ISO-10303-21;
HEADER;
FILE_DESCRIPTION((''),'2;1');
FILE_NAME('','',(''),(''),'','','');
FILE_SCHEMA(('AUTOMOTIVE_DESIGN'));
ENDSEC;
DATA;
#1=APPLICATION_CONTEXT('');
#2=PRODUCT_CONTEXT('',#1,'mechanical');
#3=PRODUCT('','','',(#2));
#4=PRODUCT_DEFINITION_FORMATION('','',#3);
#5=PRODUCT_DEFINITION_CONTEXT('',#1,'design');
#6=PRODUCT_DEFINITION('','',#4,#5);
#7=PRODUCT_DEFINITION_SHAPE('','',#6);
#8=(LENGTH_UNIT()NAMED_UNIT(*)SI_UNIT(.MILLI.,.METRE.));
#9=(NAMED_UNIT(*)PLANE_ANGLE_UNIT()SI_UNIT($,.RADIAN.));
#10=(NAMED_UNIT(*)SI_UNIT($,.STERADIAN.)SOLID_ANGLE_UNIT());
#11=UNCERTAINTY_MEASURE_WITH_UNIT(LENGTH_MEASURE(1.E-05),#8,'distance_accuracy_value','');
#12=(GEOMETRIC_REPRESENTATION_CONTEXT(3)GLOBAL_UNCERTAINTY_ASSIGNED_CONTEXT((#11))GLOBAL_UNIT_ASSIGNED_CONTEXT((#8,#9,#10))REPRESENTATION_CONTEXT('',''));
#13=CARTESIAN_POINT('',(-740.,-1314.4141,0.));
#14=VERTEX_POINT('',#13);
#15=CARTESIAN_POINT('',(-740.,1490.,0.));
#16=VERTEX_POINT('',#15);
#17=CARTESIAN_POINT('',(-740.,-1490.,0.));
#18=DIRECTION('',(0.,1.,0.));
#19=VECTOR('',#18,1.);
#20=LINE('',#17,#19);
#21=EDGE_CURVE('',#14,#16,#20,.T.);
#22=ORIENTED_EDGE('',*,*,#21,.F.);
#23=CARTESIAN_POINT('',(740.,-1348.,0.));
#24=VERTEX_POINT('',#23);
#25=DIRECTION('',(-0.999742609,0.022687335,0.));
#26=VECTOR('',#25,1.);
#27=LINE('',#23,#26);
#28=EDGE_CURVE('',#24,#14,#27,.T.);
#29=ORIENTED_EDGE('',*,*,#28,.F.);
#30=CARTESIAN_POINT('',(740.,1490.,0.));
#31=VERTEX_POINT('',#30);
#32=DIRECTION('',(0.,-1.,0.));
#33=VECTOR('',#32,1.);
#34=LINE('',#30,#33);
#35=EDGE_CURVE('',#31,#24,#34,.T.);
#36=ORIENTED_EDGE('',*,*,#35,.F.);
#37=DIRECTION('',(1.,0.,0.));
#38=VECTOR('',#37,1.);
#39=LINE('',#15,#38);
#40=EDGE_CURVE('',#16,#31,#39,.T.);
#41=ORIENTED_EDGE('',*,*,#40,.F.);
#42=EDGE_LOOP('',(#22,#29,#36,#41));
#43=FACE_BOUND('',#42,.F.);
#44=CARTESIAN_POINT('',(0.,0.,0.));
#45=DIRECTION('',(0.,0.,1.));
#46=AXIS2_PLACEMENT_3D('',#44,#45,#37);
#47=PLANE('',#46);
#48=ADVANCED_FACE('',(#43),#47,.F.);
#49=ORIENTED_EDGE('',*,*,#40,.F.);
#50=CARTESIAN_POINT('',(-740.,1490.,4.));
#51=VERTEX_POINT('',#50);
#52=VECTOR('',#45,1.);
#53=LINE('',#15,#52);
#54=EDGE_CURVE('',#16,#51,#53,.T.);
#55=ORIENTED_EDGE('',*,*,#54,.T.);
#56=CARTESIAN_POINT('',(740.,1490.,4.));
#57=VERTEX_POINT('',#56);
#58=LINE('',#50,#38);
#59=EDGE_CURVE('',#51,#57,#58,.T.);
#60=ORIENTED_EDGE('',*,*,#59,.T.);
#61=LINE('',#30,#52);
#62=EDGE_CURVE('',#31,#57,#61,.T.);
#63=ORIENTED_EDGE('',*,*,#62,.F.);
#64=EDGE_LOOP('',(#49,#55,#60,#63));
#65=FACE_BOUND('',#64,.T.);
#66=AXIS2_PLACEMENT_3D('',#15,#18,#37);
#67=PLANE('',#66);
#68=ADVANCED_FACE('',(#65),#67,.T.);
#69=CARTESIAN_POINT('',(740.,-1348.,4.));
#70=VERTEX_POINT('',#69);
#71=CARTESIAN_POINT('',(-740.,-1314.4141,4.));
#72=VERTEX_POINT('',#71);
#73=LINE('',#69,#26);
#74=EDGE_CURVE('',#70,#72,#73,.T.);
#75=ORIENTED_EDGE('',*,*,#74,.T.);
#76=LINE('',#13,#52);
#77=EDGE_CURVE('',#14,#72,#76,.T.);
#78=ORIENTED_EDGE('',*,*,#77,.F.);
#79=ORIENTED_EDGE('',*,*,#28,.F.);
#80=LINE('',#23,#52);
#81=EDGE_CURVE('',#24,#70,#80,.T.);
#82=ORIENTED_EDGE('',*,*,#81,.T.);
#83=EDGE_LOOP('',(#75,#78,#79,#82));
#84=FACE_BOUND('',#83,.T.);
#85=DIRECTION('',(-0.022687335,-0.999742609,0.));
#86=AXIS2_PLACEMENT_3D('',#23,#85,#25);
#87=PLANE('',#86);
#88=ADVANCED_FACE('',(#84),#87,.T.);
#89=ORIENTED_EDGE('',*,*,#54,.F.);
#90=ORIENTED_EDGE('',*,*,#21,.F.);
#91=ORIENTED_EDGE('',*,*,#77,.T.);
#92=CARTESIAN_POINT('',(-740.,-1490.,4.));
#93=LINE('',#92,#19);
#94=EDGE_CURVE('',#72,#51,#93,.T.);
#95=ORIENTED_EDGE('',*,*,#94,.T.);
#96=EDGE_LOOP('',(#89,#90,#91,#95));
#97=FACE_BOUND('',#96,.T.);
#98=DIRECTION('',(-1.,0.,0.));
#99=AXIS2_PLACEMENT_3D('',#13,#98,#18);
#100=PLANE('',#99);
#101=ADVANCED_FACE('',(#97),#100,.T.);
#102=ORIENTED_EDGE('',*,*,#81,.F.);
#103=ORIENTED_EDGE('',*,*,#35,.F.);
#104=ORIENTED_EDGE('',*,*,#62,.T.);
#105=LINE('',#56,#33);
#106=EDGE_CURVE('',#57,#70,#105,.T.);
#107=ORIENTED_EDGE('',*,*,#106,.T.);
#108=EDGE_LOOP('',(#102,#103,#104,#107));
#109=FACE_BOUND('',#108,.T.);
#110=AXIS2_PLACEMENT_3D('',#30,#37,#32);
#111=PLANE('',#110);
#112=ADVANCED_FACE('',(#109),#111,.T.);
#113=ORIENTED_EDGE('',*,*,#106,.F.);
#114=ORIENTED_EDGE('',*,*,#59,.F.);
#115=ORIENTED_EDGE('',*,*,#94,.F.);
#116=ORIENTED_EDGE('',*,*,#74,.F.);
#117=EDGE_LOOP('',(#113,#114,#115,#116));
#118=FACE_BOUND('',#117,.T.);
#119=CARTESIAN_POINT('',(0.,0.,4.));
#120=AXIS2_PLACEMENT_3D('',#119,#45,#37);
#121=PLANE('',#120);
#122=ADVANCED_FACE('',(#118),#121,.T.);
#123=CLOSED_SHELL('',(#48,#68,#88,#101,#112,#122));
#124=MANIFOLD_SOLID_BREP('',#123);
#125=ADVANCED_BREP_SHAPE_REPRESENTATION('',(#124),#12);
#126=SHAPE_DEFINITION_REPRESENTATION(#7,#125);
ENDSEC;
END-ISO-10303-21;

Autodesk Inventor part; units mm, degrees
ref_plane "YZ Plane" through (0, 0, 0) normal (1, 0, 0) x (0, 1, 0)
ref_plane "XZ Plane" through (0, 0, 0) normal (0, 1, 0) x (-1, 0, 0)
ref_plane "XY Plane" through (0, 0, 0) normal (0, 0, 1) x (1, 0, 0)
sketch "Sketch1" plane through (0, 0, 0) normal (0, 0, 1) x (1, 0, 0)
  line L0 (740, -1490) -> (-740, -1490)
  line L1 (-740, -1490) -> (-740, 1490)
  line L2 (-740, 1490) -> (740, 1490)
  line L3 (740, 1490) -> (740, -1490)
  line L4 (740, -1490) -> (-740, 1490) construction
  line L5 (-740, -1490) -> (740, 1490) construction
  line L6 (740, -1348) -> (-740, -1314.4141)
  point P0 (0, 0)
  dimension "d0" = 1480
  dimension "d1" = 2980
  dimension "d3" = 1.3
  dimension "d5" = 2838
  dimension "d6" = 142
extrude "Plate1" add sketch "Sketch1" along normal blind 4 contours L6 L1 L2 L3
sketch "Sketch2" plane through (0, 0, 4) normal (0, 0, 1) x (1, 0, 0)
  line L0 (581.0754, -1023.615) -> (581.0754, -1381.3055) construction
  line L1 (581.0754, -1381.3055) -> (489.8191, -1381.3055) construction
  line L2 (489.8191, -1381.3055) -> (489.8191, -1023.615) construction
  line L3 (489.8191, -1023.615) -> (581.0754, -1023.615) construction
  line L4 (690.2486, -1238) -> (690.2486, -1335) projected
  line L5 (690.2486, -1335) -> (686.2496, -1335) projected
  line L6 (190.12, -1238) -> (190.12, -1335) projected
  line L7 (-310.0086, -1238) -> (-310.0086, -1335) projected
  line L8 (-310.0086, -1335) -> (-314.0076, -1335) projected
  line L9 (190.12, -1335) -> (186.121, -1335) projected
  ellipse E0 centre (-310.0086, 1490.5) end of major axis (-310.0086, 1520.5) minor radius 0.6803 (-310.0086, 1460.5) -> (-310.0086, 1520.5) ccw projected
  line L10 (-310.0086, 1460.5) -> (-314.0076, 1460.5) projected
  ellipse E1 centre (190.12, 1490.5) end of major axis (190.12, 1520.5) minor radius 0.6803 (190.12, 1460.5) -> (190.12, 1520.5) ccw projected
  line L11 (190.12, 1460.5) -> (186.121, 1460.5) projected
  ellipse E2 centre (690.2486, 1490.5) end of major axis (690.2486, 1520.5) minor radius 0.6803 (690.2486, 1460.5) -> (690.2486, 1520.5) ccw projected
  line L12 (690.2486, 1460.5) -> (686.2496, 1460.5) projected
  line L13 (770, 1252.8333) -> (710, 1252.8333) projected
  line L14 (710, 1248.8333) -> (710, 1252.8333) projected
  line L15 (770, 756.1667) -> (710, 756.1667) projected
  line L16 (710, 752.1667) -> (710, 756.1667) projected
  line L17 (770, 259.5) -> (710, 259.5) projected
  line L18 (710, 255.5) -> (710, 259.5) projected
  line L19 (770, -237.1667) -> (710, -237.1667) projected
  line L20 (710, -241.1667) -> (710, -237.1667) projected
  line L21 (770, -733.8333) -> (710, -733.8333) projected
  line L22 (710, -737.8333) -> (710, -733.8333) projected
  line L23 (770, -1230.5) -> (710, -1230.5) projected
  line L24 (710, -1234.5) -> (710, -1230.5) projected
  line L25 (-710, 1252.8333) -> (-739.3197, 1252.8333) projected
  line L26 (-710, 1248.8333) -> (-710, 1252.8333) projected
  line L27 (-710, 756.1667) -> (-739.3197, 756.1667) projected
  line L28 (-710, 752.1667) -> (-710, 756.1667) projected
  line L29 (-710, 259.5) -> (-739.3197, 259.5) projected
  line L30 (-710, 255.5) -> (-710, 259.5) projected
  line L31 (-710, -237.1667) -> (-739.3197, -237.1667) projected
  line L32 (-710, -241.1667) -> (-710, -237.1667) projected
  line L33 (-710, -733.8333) -> (-739.3197, -733.8333) projected
  line L34 (-710, -737.8333) -> (-710, -733.8333) projected
  line L35 (-710, -1230.5) -> (-739.3197, -1230.5) projected
  line L36 (-710, -1234.5) -> (-710, -1230.5) projected
mark "Mark1"
equation "\"d0\" = Лист_ширина"
equation "\"d2\" = Thickness"
equation "\"BendRadius\" = Thickness"
equation "\"BendReliefWidth\" = Thickness"
equation "\"BendReliefDepth\" = 0.5 * Thickness"
equation "\"CornerReliefSize\" = 4 * Thickness"
equation "\"MinimumRemnant\" = 2 * Thickness"
equation "\"TransitionRadius\" = BendRadius"
equation "\"JacobiRadiusSize\" = BendRadius"
equation "\"GapSize\" = Thickness"
equation "\"Лист_ширина\" = 1480"
equation "\"Thickness\" = 4"
properties part number "GBK 2211 shield 4" material "Steel"
